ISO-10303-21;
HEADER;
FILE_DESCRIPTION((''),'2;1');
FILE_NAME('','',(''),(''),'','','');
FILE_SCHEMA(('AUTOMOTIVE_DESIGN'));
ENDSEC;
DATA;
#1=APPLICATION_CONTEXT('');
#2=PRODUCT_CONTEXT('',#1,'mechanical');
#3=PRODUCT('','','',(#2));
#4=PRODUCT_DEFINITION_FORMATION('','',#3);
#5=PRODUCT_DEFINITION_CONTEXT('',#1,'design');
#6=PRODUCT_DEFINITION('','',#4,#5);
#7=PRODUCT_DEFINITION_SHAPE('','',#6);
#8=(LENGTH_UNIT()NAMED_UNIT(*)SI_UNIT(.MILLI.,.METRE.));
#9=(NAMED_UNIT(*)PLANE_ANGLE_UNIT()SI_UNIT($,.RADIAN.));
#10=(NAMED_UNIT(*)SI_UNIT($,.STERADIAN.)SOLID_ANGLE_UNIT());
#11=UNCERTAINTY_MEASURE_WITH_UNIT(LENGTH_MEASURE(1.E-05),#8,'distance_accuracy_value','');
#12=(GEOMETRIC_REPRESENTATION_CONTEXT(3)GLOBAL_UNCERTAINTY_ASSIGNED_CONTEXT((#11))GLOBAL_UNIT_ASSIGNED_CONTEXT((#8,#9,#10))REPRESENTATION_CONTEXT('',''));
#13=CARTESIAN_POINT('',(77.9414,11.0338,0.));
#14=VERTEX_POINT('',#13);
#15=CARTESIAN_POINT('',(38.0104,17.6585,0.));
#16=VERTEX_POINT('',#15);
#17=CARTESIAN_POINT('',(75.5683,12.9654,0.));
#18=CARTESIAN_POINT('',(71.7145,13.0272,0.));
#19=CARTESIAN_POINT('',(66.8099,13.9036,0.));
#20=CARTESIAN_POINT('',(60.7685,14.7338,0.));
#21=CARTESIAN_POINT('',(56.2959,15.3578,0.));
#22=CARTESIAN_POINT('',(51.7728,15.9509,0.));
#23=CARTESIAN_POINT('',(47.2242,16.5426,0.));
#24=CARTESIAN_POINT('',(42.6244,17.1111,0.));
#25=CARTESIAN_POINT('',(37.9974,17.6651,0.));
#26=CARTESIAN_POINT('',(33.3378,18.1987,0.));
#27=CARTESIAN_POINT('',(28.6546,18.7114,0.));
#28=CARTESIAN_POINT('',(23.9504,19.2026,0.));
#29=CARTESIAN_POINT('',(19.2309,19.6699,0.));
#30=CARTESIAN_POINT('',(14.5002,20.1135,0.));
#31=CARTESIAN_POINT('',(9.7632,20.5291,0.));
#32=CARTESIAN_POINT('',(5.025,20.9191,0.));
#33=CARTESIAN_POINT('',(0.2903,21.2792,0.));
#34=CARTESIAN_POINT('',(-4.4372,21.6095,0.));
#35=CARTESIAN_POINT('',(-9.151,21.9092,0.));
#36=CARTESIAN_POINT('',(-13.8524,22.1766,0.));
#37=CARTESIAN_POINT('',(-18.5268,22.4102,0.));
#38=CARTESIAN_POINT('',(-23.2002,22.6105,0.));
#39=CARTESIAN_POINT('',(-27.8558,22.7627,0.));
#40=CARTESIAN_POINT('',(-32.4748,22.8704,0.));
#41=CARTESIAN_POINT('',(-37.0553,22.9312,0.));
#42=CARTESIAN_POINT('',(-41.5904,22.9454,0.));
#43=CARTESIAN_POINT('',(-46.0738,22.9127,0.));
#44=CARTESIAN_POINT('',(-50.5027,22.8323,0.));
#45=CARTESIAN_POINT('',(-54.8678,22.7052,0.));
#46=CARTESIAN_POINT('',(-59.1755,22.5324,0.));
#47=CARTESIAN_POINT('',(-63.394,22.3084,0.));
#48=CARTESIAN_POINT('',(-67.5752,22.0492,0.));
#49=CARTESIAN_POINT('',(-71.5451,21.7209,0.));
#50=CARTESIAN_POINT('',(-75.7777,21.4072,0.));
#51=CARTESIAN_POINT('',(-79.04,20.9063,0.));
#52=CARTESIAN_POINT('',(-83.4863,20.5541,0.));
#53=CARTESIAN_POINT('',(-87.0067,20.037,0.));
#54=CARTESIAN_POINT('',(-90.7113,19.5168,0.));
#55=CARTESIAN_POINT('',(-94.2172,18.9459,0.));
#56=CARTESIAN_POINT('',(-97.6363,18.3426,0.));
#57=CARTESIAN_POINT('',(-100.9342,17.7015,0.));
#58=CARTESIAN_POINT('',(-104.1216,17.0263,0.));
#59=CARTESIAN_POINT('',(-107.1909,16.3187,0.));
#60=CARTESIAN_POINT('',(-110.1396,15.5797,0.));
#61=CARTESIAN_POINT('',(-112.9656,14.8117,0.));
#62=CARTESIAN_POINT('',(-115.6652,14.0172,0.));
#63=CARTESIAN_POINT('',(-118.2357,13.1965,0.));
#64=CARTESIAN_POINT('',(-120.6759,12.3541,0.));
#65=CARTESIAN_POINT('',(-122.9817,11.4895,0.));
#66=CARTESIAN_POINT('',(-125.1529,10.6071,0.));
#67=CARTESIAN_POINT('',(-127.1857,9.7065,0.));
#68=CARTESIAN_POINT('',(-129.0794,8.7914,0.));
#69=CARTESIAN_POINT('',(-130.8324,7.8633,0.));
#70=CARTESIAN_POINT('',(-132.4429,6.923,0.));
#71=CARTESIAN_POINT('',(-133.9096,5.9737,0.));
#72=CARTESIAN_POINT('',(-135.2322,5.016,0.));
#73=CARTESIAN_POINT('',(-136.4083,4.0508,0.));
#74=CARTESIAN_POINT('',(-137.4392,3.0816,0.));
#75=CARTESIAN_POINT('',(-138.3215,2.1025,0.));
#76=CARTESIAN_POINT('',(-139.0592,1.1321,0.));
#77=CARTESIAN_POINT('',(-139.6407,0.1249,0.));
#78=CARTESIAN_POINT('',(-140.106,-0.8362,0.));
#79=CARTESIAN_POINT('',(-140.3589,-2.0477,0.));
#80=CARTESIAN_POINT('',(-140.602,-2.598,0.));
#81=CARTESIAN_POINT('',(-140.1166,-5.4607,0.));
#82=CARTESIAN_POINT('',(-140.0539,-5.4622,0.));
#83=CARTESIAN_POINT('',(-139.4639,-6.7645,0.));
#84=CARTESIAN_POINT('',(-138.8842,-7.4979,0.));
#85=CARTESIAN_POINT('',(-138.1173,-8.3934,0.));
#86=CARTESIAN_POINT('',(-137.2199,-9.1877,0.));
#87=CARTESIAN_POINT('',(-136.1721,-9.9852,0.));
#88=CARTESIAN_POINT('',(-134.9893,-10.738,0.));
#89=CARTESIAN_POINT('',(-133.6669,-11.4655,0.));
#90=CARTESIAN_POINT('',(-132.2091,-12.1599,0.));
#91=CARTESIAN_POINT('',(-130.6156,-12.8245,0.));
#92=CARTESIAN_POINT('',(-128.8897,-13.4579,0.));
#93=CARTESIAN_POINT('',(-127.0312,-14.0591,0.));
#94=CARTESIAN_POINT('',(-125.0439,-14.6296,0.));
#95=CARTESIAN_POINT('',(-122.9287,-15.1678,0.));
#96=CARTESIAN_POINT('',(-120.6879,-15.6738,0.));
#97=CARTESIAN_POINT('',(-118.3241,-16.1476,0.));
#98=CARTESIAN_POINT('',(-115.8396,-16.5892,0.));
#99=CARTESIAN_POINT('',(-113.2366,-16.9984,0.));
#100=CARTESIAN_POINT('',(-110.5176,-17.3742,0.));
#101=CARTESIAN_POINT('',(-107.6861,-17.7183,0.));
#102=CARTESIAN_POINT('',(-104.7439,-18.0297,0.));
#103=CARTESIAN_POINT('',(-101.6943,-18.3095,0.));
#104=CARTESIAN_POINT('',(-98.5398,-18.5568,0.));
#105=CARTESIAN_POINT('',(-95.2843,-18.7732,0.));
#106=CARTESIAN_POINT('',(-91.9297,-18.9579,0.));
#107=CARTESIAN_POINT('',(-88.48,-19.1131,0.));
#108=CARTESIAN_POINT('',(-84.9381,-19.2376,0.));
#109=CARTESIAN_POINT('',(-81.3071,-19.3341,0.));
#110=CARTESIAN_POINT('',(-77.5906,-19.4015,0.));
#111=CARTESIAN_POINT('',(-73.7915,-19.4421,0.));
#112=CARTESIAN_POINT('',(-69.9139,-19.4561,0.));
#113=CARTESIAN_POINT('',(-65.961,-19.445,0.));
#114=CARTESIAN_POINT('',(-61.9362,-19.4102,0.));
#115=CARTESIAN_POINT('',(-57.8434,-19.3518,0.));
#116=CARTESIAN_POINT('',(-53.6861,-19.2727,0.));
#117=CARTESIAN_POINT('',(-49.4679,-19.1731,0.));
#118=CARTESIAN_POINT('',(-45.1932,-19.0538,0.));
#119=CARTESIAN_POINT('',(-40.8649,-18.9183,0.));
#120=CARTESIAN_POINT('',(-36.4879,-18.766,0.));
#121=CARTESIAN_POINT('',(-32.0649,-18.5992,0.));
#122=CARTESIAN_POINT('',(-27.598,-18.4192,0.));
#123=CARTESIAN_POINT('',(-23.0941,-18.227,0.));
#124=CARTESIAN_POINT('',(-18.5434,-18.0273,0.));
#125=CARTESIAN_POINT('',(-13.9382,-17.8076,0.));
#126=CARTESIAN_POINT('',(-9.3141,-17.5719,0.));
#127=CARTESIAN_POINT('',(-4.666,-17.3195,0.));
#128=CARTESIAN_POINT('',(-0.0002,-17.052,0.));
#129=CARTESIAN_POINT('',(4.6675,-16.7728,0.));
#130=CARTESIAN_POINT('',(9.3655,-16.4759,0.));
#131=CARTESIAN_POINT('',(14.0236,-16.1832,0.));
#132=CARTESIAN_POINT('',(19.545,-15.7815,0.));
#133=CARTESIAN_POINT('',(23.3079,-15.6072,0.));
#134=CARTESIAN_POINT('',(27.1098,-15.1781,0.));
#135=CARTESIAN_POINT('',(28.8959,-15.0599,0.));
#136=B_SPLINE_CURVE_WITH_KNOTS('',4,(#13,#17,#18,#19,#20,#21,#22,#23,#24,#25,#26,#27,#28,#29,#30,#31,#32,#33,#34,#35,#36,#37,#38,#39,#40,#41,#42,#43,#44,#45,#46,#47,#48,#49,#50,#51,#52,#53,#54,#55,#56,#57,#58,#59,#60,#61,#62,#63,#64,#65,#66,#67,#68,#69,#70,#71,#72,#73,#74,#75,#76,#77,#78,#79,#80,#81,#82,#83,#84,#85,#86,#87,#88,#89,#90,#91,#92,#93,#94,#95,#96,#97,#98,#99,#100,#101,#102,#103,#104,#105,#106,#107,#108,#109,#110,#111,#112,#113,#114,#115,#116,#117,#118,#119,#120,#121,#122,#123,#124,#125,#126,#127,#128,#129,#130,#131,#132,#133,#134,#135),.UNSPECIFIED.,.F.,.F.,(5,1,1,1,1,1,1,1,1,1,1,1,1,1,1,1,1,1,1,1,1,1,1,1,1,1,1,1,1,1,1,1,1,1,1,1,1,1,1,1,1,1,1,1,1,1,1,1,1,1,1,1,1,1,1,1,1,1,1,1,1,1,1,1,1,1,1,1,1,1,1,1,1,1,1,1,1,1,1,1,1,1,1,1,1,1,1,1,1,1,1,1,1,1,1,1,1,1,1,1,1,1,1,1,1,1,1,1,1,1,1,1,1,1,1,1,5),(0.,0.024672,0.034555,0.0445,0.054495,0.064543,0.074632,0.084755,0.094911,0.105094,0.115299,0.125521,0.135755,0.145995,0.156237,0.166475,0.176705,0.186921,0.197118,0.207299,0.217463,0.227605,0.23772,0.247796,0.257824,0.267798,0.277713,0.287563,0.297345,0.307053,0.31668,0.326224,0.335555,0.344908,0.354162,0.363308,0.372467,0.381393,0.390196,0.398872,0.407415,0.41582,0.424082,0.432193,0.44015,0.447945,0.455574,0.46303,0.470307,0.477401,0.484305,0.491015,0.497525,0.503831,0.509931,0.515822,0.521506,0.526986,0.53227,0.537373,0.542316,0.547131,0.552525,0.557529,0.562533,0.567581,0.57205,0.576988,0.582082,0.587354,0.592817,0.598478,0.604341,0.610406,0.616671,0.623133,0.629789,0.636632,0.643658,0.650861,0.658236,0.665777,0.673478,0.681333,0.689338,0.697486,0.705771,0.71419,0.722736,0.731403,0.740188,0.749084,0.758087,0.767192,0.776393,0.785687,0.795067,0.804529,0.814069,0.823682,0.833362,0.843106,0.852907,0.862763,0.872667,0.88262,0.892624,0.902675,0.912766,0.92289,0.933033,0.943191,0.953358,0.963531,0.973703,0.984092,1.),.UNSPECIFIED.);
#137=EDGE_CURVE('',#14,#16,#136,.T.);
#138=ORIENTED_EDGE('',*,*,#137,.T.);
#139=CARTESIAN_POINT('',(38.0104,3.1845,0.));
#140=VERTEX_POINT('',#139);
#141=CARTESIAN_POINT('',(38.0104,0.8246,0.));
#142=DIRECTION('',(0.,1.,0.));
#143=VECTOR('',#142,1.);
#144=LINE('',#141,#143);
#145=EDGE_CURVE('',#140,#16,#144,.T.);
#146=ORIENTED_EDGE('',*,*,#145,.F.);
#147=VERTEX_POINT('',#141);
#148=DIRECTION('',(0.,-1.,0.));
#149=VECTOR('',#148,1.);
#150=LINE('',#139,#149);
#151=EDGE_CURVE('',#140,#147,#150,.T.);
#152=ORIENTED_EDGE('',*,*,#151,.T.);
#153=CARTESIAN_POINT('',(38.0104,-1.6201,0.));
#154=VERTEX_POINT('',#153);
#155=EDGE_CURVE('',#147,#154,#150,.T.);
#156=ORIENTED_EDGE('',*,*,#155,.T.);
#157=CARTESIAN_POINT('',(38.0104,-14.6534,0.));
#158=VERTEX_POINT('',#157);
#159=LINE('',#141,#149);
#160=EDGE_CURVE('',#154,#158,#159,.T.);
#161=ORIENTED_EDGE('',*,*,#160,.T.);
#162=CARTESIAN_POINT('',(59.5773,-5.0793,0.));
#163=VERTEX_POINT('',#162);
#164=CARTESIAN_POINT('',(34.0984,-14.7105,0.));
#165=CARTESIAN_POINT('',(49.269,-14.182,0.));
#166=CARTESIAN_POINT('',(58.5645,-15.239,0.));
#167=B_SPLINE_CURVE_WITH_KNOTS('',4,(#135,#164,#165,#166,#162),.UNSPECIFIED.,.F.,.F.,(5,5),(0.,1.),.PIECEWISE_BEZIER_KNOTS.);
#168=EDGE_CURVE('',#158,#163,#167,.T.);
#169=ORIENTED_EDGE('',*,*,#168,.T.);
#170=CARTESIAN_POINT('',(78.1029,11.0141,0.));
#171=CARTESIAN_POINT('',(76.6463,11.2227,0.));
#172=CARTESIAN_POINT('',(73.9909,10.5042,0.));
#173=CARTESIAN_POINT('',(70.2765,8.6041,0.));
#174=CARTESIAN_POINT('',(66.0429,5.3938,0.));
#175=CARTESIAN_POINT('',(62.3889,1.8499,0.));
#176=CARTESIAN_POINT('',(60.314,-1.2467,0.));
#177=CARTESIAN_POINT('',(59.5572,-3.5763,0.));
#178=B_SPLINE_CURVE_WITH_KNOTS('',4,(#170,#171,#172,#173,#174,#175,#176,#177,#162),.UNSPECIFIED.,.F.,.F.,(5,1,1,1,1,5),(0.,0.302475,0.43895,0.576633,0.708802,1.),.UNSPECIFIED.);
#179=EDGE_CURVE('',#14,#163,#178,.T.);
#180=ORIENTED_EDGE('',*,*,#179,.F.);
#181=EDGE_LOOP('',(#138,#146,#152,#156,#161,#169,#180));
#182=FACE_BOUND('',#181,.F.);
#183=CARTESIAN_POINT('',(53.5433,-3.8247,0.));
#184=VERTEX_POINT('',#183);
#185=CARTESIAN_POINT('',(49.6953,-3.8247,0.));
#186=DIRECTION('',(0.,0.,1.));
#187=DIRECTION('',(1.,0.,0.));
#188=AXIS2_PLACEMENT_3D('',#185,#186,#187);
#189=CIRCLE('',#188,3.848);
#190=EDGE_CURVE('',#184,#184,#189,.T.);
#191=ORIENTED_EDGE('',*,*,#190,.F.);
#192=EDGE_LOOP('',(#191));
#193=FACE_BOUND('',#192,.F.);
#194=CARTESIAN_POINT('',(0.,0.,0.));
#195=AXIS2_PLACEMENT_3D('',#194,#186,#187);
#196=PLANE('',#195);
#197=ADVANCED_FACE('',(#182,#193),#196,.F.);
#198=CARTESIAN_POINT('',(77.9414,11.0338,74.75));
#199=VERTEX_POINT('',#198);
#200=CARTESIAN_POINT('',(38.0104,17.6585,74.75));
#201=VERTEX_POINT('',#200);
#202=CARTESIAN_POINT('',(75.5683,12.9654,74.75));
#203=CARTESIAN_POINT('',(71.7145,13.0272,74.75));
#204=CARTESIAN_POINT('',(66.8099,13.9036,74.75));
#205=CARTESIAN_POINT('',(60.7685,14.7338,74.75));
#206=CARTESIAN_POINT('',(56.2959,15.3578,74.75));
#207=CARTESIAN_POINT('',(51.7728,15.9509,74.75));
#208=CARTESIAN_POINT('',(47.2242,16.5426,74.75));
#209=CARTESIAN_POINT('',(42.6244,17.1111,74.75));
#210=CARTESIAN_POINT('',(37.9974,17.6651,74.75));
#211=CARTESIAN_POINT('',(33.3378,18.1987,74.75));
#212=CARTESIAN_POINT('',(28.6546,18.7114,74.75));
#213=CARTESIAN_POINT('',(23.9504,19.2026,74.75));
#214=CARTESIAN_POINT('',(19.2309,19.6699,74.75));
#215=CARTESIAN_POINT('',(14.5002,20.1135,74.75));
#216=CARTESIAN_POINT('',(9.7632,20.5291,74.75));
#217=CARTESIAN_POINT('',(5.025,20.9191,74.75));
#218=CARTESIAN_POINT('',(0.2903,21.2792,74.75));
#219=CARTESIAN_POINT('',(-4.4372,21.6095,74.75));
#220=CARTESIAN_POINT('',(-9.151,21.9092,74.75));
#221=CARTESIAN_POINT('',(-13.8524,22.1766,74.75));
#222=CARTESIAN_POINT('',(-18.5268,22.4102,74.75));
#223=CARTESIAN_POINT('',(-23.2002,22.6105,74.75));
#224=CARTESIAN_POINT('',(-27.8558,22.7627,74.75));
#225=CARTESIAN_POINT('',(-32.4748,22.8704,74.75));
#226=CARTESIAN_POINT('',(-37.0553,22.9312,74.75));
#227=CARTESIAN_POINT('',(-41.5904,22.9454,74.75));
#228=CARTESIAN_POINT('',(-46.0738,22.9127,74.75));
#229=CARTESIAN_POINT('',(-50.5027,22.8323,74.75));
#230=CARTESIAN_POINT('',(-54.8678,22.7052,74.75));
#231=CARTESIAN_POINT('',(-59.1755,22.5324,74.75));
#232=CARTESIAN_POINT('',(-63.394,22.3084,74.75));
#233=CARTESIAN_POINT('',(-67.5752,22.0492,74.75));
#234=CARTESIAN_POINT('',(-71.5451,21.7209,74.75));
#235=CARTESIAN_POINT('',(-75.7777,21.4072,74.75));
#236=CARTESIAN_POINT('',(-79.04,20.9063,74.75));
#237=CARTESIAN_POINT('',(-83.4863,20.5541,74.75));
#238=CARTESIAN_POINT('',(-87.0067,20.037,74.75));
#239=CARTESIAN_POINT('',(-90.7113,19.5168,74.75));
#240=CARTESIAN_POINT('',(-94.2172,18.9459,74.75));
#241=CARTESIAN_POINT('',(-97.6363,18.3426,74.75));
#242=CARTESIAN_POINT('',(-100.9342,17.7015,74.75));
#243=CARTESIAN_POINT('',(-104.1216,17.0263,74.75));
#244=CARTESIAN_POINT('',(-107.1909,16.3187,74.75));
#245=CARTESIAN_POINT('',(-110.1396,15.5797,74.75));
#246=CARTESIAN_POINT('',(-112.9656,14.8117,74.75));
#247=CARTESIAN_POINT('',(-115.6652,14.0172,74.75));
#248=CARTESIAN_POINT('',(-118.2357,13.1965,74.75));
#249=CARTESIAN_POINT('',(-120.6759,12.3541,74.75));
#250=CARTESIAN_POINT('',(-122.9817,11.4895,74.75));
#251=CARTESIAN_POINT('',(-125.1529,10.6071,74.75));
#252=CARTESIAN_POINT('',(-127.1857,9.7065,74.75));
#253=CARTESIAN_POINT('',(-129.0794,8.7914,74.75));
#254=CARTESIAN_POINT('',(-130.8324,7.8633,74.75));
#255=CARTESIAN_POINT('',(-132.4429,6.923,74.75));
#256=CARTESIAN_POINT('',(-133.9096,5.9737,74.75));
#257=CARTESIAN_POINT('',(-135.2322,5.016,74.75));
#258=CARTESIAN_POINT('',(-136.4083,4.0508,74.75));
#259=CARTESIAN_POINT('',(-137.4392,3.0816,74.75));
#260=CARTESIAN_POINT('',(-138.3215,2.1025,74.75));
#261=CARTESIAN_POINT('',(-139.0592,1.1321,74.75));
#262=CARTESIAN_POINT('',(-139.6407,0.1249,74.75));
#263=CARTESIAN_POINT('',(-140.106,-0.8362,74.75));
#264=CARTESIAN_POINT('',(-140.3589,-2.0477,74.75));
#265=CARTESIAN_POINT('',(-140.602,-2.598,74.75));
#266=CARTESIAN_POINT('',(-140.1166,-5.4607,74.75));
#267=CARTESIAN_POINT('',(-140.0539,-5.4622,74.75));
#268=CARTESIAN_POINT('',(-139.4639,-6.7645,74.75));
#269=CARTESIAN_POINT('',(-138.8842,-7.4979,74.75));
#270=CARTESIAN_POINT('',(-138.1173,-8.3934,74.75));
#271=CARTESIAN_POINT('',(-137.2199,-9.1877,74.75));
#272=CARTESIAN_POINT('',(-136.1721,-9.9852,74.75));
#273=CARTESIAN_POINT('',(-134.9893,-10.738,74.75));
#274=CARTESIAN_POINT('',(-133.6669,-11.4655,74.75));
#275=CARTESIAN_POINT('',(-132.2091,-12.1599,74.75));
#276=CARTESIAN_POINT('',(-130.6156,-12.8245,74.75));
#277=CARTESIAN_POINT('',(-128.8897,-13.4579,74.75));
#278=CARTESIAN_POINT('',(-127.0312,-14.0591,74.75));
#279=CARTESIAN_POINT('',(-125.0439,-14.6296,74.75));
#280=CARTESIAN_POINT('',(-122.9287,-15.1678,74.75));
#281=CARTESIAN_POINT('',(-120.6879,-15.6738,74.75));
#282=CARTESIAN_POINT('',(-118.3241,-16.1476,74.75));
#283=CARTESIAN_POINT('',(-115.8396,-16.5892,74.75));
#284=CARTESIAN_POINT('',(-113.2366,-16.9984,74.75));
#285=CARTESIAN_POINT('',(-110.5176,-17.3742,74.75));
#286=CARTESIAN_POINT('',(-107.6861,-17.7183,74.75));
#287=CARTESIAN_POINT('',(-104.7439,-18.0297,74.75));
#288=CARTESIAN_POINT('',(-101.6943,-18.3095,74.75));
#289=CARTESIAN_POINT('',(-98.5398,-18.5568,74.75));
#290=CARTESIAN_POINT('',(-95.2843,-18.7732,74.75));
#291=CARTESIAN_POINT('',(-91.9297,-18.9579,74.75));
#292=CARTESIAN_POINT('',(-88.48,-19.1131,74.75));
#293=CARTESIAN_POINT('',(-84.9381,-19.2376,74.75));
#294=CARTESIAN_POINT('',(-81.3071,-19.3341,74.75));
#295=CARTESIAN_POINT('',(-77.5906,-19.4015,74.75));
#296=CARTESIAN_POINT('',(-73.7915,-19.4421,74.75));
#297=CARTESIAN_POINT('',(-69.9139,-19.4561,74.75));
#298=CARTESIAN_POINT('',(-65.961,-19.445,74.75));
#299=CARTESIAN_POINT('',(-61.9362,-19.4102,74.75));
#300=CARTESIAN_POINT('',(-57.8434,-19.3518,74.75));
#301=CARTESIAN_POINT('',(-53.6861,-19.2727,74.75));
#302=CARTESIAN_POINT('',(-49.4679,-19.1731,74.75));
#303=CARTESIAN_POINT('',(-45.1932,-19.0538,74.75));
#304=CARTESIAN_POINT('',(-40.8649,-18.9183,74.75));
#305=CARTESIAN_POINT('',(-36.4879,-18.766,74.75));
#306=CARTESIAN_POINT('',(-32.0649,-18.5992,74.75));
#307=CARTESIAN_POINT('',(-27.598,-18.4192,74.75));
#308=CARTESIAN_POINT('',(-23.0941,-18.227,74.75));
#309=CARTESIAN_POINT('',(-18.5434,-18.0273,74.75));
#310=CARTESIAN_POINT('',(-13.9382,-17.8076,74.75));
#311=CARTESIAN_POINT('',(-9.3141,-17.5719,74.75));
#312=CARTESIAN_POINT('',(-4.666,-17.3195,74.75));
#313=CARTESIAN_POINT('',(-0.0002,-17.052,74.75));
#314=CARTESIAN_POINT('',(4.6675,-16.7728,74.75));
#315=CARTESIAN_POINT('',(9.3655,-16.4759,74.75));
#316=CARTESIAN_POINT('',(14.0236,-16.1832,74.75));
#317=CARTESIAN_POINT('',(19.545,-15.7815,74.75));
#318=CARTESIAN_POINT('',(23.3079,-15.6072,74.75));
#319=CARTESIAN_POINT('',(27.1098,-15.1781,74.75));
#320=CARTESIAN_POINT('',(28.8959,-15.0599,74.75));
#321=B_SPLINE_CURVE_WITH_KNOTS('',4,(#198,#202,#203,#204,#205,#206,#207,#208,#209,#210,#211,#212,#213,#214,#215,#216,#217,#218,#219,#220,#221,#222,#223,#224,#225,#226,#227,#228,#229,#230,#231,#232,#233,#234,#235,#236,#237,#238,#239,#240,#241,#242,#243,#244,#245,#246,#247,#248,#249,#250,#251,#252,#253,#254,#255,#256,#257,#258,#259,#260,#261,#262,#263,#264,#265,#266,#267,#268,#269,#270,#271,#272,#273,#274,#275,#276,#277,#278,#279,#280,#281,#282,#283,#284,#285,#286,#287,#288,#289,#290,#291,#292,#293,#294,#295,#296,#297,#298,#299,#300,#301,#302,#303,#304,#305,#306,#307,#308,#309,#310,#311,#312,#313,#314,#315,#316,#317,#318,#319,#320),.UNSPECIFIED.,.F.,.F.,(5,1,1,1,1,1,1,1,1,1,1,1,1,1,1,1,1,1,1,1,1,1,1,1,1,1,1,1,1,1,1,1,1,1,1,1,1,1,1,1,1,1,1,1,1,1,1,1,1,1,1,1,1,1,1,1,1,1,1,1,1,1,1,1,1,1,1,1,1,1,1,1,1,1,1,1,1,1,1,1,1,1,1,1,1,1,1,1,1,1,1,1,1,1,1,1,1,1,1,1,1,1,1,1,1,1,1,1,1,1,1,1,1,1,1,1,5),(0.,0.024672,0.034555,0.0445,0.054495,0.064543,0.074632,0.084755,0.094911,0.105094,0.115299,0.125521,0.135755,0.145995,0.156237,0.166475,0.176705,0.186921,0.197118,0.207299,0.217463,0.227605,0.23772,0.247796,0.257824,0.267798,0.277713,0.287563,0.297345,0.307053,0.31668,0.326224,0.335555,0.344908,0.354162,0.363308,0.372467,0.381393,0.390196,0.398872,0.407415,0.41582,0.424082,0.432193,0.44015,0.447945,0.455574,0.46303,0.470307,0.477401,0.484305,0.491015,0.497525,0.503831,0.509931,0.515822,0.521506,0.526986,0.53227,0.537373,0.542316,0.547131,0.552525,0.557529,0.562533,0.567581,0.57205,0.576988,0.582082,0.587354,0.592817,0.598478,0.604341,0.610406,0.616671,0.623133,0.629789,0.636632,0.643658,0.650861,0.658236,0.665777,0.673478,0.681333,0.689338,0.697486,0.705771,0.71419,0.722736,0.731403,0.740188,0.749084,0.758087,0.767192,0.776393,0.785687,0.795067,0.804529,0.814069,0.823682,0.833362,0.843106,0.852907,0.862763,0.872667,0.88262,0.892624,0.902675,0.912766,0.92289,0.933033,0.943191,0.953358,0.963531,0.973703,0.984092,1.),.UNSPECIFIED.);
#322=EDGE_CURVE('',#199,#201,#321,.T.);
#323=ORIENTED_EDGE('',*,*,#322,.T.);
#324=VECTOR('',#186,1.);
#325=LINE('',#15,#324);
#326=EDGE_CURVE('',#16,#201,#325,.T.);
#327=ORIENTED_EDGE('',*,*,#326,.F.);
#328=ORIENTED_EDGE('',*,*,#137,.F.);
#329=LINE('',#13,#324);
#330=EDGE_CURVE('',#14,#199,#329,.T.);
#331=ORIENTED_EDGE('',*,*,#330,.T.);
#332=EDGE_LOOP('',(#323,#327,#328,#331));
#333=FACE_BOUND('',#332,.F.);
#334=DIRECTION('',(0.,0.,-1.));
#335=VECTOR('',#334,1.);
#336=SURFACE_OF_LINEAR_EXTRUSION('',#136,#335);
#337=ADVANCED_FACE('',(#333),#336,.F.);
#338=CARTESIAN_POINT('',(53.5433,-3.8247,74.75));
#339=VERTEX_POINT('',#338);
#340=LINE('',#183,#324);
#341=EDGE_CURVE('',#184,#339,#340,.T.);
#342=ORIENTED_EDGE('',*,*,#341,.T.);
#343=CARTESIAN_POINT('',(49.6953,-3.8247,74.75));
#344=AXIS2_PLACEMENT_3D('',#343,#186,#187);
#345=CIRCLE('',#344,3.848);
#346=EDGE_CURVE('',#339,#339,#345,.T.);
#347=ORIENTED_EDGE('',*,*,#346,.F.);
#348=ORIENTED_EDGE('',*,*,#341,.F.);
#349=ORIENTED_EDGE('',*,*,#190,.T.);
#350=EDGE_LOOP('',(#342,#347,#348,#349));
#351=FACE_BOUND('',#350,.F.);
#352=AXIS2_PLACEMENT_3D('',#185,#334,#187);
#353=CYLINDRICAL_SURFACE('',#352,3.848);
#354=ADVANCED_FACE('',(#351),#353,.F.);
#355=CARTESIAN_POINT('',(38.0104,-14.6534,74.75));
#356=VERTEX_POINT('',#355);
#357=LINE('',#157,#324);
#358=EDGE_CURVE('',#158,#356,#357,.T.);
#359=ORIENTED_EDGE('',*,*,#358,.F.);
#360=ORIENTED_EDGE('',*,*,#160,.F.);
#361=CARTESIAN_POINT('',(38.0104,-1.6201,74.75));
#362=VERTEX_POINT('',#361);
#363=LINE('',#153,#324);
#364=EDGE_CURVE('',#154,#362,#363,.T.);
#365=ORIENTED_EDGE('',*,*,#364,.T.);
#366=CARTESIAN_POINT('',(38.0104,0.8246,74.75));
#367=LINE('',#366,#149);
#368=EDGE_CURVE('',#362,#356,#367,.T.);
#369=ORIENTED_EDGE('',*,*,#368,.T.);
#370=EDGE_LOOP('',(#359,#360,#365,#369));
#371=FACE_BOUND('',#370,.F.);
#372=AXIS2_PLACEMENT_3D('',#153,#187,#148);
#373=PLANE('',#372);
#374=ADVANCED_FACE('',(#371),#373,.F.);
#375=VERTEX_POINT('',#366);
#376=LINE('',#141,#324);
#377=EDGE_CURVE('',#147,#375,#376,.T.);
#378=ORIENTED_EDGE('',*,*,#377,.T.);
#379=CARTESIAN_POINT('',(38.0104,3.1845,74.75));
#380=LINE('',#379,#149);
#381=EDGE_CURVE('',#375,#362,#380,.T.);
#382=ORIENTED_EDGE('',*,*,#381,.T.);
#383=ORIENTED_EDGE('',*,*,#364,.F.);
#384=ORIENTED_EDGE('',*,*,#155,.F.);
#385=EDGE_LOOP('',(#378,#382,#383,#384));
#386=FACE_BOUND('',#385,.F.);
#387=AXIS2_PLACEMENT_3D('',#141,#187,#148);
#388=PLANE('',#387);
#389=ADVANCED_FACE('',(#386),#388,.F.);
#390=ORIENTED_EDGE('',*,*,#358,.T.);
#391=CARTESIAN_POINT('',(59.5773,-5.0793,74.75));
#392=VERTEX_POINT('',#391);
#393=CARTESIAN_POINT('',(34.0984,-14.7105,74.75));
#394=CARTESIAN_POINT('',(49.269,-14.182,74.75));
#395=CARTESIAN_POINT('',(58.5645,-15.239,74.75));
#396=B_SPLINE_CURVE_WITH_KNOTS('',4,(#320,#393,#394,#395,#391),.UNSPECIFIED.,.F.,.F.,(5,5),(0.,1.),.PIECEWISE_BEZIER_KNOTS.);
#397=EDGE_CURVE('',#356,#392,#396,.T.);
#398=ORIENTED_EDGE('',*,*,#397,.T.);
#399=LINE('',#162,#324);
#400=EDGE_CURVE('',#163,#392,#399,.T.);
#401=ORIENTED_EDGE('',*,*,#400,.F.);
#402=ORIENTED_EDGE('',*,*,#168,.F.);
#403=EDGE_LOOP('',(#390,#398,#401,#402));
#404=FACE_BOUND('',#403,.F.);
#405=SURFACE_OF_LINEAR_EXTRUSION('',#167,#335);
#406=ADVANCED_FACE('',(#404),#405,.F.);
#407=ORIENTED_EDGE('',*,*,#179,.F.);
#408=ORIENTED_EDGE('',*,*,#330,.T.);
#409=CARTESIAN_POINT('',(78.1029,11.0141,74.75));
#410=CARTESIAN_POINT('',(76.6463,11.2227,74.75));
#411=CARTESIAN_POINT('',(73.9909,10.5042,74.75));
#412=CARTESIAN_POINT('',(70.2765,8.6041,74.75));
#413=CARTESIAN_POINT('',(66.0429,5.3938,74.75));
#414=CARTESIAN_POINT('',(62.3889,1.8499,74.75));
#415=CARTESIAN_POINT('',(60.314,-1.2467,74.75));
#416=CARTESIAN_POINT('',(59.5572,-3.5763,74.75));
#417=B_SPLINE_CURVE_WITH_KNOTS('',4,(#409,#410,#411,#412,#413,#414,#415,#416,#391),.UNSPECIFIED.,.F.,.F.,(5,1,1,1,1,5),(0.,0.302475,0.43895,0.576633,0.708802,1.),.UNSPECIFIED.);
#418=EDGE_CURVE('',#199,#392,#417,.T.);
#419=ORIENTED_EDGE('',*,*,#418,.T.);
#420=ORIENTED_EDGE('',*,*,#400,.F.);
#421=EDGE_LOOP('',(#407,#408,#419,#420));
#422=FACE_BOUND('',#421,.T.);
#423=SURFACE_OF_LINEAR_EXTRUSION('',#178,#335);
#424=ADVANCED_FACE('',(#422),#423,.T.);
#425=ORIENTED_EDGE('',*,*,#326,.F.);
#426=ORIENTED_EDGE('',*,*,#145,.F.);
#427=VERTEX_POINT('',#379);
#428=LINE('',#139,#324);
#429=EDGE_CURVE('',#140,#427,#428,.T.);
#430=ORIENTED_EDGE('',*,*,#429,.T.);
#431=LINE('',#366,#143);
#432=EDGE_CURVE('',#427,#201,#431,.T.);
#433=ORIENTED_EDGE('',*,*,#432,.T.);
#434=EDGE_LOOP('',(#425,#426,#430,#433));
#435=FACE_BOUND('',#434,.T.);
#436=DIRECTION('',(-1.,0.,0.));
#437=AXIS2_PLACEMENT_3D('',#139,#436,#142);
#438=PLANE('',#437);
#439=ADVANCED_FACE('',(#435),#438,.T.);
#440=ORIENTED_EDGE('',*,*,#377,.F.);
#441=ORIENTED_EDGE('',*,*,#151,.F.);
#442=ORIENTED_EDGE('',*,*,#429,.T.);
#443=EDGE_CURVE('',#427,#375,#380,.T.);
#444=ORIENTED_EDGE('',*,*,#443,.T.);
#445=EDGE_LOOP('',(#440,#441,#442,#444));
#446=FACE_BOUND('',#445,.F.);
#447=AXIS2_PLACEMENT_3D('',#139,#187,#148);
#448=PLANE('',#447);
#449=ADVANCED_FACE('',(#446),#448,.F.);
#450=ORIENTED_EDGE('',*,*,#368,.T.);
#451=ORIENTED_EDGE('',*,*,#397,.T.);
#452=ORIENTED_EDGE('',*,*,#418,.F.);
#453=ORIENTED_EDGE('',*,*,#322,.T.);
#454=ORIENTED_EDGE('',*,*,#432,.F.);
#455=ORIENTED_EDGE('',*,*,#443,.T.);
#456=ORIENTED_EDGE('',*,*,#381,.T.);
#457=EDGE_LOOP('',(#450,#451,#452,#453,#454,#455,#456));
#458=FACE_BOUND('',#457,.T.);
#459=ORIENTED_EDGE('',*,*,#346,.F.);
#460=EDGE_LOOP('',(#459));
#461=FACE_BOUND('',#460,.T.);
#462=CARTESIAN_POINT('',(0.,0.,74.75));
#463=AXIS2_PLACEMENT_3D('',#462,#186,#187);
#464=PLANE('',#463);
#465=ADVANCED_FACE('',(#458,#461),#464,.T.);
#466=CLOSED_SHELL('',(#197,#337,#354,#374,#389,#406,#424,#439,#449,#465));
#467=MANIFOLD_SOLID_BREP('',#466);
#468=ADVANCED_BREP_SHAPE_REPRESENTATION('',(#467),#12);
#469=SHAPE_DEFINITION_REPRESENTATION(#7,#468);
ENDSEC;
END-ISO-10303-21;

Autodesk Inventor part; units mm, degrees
ref_plane "YZ Plane" through (0, 0, 0) normal (1, 0, 0) x (0, 1, 0)
ref_plane "XZ Plane" through (0, 0, 0) normal (0, 1, 0) x (-1, 0, 0)
ref_plane "XY Plane" through (0, 0, 0) normal (0, 0, 1) x (1, 0, 0)
sketch "Sketch3" plane through (0, 0, 0) normal (0, 0, 1) x (1, 0, 0)
  line L0 (-80.5781, 0.8246) -> (-80.5781, 20.7988) construction
  circle A0 centre (-80.5781, 0.8246) radius 13.481
  line L1 (-53.7179, 12.5571) -> (-53.7179, -10.9927)
  arc A1 (-53.7179, -10.9927) -> (-51.5054, -12.9814) centre (-51.7179, -10.9927) ccw
  arc A2 (-51.5054, 14.5458) -> (-53.7179, 12.5571) centre (-51.7179, 12.5571) ccw
  line L2 (36.2229, -3.6088) -> (-51.5054, -12.9814)
  line L3 (38.0104, 3.1845) -> (38.0104, -1.6201)
  line L4 (-80.5781, 0.8246) -> (49.5525, 0.8246) construction
  circle A3 centre (49.6953, -3.8247) radius 3.848
  line L5 (59.6953, 14.884) -> (59.6953, -12.7998) construction
  spline S0 degree 4 poles (77.9414, 11.0338) (75.5683, 12.9654) (71.7145, 13.0272) (66.8099, 13.9036) (60.7685, 14.7338) (56.2959, 15.3578) (51.7728, 15.9509) (47.2242, 16.5426) (42.6244, 17.1111) (37.9974, 17.6651) (33.3378, 18.1987) (28.6546, 18.7114) (23.9504, 19.2026) (19.2309, 19.6699) (14.5002, 20.1135) (9.7632, 20.5291) (5.025, 20.9191) (0.2903, 21.2792) (-4.4372, 21.6095) (-9.151, 21.9092) (-13.8524, 22.1766) (-18.5268, 22.4102) (-23.2002, 22.6105) (-27.8558, 22.7627) (-32.4748, 22.8704) (-37.0553, 22.9312) (-41.5904, 22.9454) (-46.0738, 22.9127) (-50.5027, 22.8323) (-54.8678, 22.7052) (-59.1755, 22.5324) (-63.394, 22.3084) (-67.5752, 22.0492) (-71.5451, 21.7209) (-75.7777, 21.4072) (-79.04, 20.9063) (-83.4863, 20.5541) (-87.0067, 20.037) (-90.7113, 19.5168) (-94.2172, 18.9459) (-97.6363, 18.3426) (-100.9342, 17.7015) (-104.1216, 17.0263) (-107.1909, 16.3187) (-110.1396, 15.5797) (-112.9656, 14.8117) (-115.6652, 14.0172) (-118.2357, 13.1965) (-120.6759, 12.3541) (-122.9817, 11.4895) (-125.1529, 10.6071) (-127.1857, 9.7065) (-129.0794, 8.7914) (-130.8324, 7.8633) (-132.4429, 6.923) (-133.9096, 5.9737) (-135.2322, 5.016) (-136.4083, 4.0508) (-137.4392, 3.0816) (-138.3215, 2.1025) (-139.0592, 1.1321) (-139.6407, 0.1249) (-140.106, -0.8362) (-140.3589, -2.0477) (-140.602, -2.598) (-140.1166, -5.4607) (-140.0539, -5.4622) (-139.4639, -6.7645) (-138.8842, -7.4979) (-138.1173, -8.3934) (-137.2199, -9.1877) (-136.1721, -9.9852) (-134.9893, -10.738) (-133.6669, -11.4655) (-132.2091, -12.1599) (-130.6156, -12.8245) (-128.8897, -13.4579) (-127.0312, -14.0591) (-125.0439, -14.6296) (-122.9287, -15.1678) (-120.6879, -15.6738) (-118.3241, -16.1476) (-115.8396, -16.5892) (-113.2366, -16.9984) (-110.5176, -17.3742) (-107.6861, -17.7183) (-104.7439, -18.0297) (-101.6943, -18.3095) (-98.5398, -18.5568) (-95.2843, -18.7732) (-91.9297, -18.9579) (-88.48, -19.1131) (-84.9381, -19.2376) (-81.3071, -19.3341) (-77.5906, -19.4015) (-73.7915, -19.4421) (-69.9139, -19.4561) (-65.961, -19.445) (-61.9362, -19.4102) (-57.8434, -19.3518) (-53.6861, -19.2727) (-49.4679, -19.1731) (-45.1932, -19.0538) (-40.8649, -18.9183) (-36.4879, -18.766) (-32.0649, -18.5992) (-27.598, -18.4192) (-23.0941, -18.227) (-18.5434, -18.0273) (-13.9382, -17.8076) (-9.3141, -17.5719) (-4.666, -17.3195) (-0.0002, -17.052) (4.6675, -16.7728) (9.3655, -16.4759) (14.0236, -16.1832) (19.545, -15.7815) (23.3079, -15.6072) (27.1098, -15.1781) (28.8959, -15.0599) knots 0 0 0 0 0 0.024672 0.034555 0.0445 0.054495 0.064543 0.074632 0.084755 0.094911 0.105094 0.115299 0.125521 0.135755 0.145995 0.156237 0.166475 0.176705 0.186921 0.197118 0.207299 0.217463 0.227605 0.23772 0.247796 0.257824 0.267798 0.277713 0.287563 0.297345 0.307053 0.31668 0.326224 0.335555 0.344908 0.354162 0.363308 0.372467 0.381393 0.390196 0.398872 0.407415 0.41582 0.424082 0.432193 0.44015 0.447945 0.455574 0.46303 0.470307 0.477401 0.484305 0.491015 0.497525 0.503831 0.509931 0.515822 0.521506 0.526986 0.53227 0.537373 0.542316 0.547131 0.552525 0.557529 0.562533 0.567581 0.57205 0.576988 0.582082 0.587354 0.592817 0.598478 0.604341 0.610406 0.616671 0.623133 0.629789 0.636632 0.643658 0.650861 0.658236 0.665777 0.673478 0.681333 0.689338 0.697486 0.705771 0.71419 0.722736 0.731403 0.740188 0.749084 0.758087 0.767192 0.776393 0.785687 0.795067 0.804529 0.814069 0.823682 0.833362 0.843106 0.852907 0.862763 0.872667 0.88262 0.892624 0.902675 0.912766 0.92289 0.933033 0.943191 0.953358 0.963531 0.973703 0.984092 1 1 1 1 1
  line L6 (7.5013, -16.4763) -> (50.2906, -13.6435) construction
  arc A4 (44.8353, -17.2546) -> (13.385, -19.3367) centre (31.5327, -54.8885) ccw construction
  line L7 (159.6953, -3.8066) -> (59.6953, -3.8066) construction
  line L8 (-51.5054, 14.5458) -> (36.2229, 5.1732)
  arc A5 (36.2229, -3.6088) -> (38.0104, -1.6201) centre (36.0104, -1.6201) ccw
  arc A6 (38.0104, 3.1845) -> (36.2229, 5.1732) centre (36.0104, 3.1845) ccw
  spline S1 degree 4 poles (78.1029, 11.0141) (76.6463, 11.2227) (73.9909, 10.5042) (70.2765, 8.6041) (66.0429, 5.3938) (62.3889, 1.8499) (60.314, -1.2467) (59.5572, -3.5763) (59.5773, -5.0793) knots 0 0 0 0 0 0.302475 0.43895 0.576633 0.708802 1 1 1 1 1
  spline S2 degree 4 poles (28.8959, -15.0599) (34.0984, -14.7105) (49.269, -14.182) (58.5645, -15.239) (59.5773, -5.0793) knots 0 0 0 0 0 1 1 1 1 1
  line L9 (28.8959, -15.0599) -> (34.0984, -14.7105) construction
  line L10 (34.0984, -14.7105) -> (49.269, -14.182) construction
  line L11 (49.269, -14.182) -> (58.5645, -15.239) construction
  line L12 (58.5645, -15.239) -> (59.5773, -5.0793) construction
  line L13 (-140.4646, -2.8394) -> (159.4818, -3.8173) construction
  line L14 (-132.0856, 0.6333) -> (-132.0856, -6.3667)
  line L15 (-132.0856, -6.3667) -> (-110.3816, -12.3574)
  line L16 (-110.3816, -12.3574) -> (-104.797, -12.3574)
  line L17 (-104.797, -12.3574) -> (-104.797, -18.0156)
  line L18 (-132.0856, 0.6333) -> (-110.3816, 10.553)
  line L19 (-110.3816, 10.553) -> (-104.1736, 10.553)
  line L20 (-104.1736, 10.553) -> (-104.1736, 17.0026)
  line L21 (38.0104, 0.8246) -> (38.0104, -14.6534)
  line L22 (38.0104, 0.8246) -> (38.0104, 17.6585)
  point P0 (0, 0)
  point P1 (17.6589, 23.5628)
  point P2 (75.883, 10.8572)
  point P3 (72.8647, 9.7686)
  point P4 (69.4179, 7.8149)
  point P5 (66.0452, 5.2617)
  point P6 (63.1887, 2.4463)
  point P7 (61.1228, -0.3317)
  point P8 (59.9357, -2.8689)
  point P9 (-160.0931, -3.8671)
  point P10 (28.8959, -15.0599)
  point P11 (69.5533, 13.4647)
  point P12 (65.1899, 14.1023)
  point P13 (60.7936, 14.7318)
  point P14 (56.3207, 15.3468)
  point P15 (51.7945, 15.947)
  point P16 (47.2398, 16.5346)
  point P17 (42.6414, 17.1053)
  point P18 (33.3491, 18.1925)
  point P19 (28.6632, 18.7055)
  point P20 (23.9568, 19.1966)
  point P21 (19.2348, 19.6643)
  point P22 (14.5017, 20.1074)
  point P23 (9.7623, 20.5238)
  point P24 (5.0217, 20.9132)
  point P25 (0.2844, 21.2735)
  point P26 (-4.4451, 21.6038)
  point P27 (-9.1614, 21.9032)
  point P28 (-13.86, 22.1702)
  point P29 (-18.5361, 22.4036)
  point P30 (-23.211, 22.601)
  point P31 (-27.8721, 22.754)
  point P32 (-32.4966, 22.8611)
  point P33 (-37.0797, 22.9217)
  point P34 (-41.6169, 22.9356)
  point P35 (-46.1028, 22.9023)
  point P36 (-50.5329, 22.8216)
  point P37 (-54.9021, 22.6941)
  point P38 (-59.2065, 22.5195)
  point P39 (-63.4406, 22.2977)
  point P40 (-67.6008, 22.0302)
  point P41 (-71.6806, 21.7165)
  point P42 (-75.6814, 21.3591)
  point P43 (-79.1834, 20.9458)
  point P44 (-83.4048, 20.5095)
  point P45 (-87.1309, 20.023)
  point P46 (-90.7527, 19.494)
  point P47 (-94.2725, 18.9266)
  point P48 (-97.6845, 18.3211)
  point P49 (-100.9861, 17.6791)
  point P50 (-107.2438, 16.2934)
  point P51 (-110.1931, 15.553)
  point P52 (-113.0194, 14.7835)
  point P53 (-115.7191, 13.987)
  point P54 (-118.2898, 13.165)
  point P55 (-120.7294, 12.3201)
  point P56 (-123.0349, 11.454)
  point P57 (-125.2048, 10.569)
  point P58 (-127.2364, 9.6666)
  point P59 (-129.1282, 8.7491)
  point P60 (-130.8786, 7.8185)
  point P61 (-132.486, 6.8762)
  point P62 (-133.9488, 5.9245)
  point P63 (-135.2661, 4.9648)
  point P64 (-136.4363, 3.9987)
  point P65 (-137.4592, 3.0275)
  point P66 (-138.3336, 2.0531)
  point P67 (-139.0591, 1.0763)
  point P68 (-139.6352, 0.0983)
  point P69 (-140.0613, -0.8802)
  point P70 (-140.338, -1.8576)
  point P71 (-140.1239, -5.2398)
  point P72 (-139.9547, -5.7022)
  point P73 (-139.492, -6.6066)
  point P74 (-138.8844, -7.4823)
  point P75 (-138.1328, -8.3292)
  point P76 (-137.2384, -9.147)
  point P77 (-136.202, -9.9355)
  point P78 (-135.0249, -10.6943)
  point P79 (-133.7085, -11.4228)
  point P80 (-132.2548, -12.1206)
  point P81 (-130.6648, -12.7879)
  point P82 (-128.941, -13.4239)
  point P83 (-127.0846, -14.0282)
  point P84 (-125.0983, -14.6009)
  point P85 (-122.9839, -15.1415)
  point P86 (-120.7435, -15.6497)
  point P87 (-118.3798, -16.1256)
  point P88 (-115.8952, -16.569)
  point P89 (-113.2918, -16.9797)
  point P90 (-110.5723, -17.3574)
  point P91 (-107.74, -17.7027)
  point P92 (-101.7463, -18.2964)
  point P93 (-98.5909, -18.5451)
  point P94 (-95.3341, -18.7623)
  point P95 (-91.9783, -18.9484)
  point P96 (-88.5271, -19.1041)
  point P97 (-84.9838, -19.2298)
  point P98 (-81.3514, -19.3267)
  point P99 (-77.6332, -19.3951)
  point P100 (-73.8324, -19.4362)
  point P101 (-69.9531, -19.4509)
  point P102 (-65.9985, -19.4404)
  point P103 (-61.9719, -19.4059)
  point P104 (-57.8772, -19.3483)
  point P105 (-53.718, -19.2694)
  point P106 (-49.4979, -19.1701)
  point P107 (-45.2211, -19.0516)
  point P108 (-40.8909, -18.916)
  point P109 (-36.5118, -18.7642)
  point P110 (-32.0871, -18.5977)
  point P111 (-27.6213, -18.418)
  point P112 (-23.1183, -18.2269)
  point P113 (-18.5646, -18.0247)
  point P114 (-13.9566, -17.8054)
  point P115 (-9.3252, -17.5693)
  point P116 (-4.674, -17.317)
  point P117 (-0.0078, -17.05)
  point P118 (4.6686, -16.7695)
  point P119 (9.3513, -16.477)
  point P120 (14.0352, -16.1731)
  point P121 (18.7161, -15.8596)
  point P122 (23.3889, -15.5371)
  point P123 (78.0825, 12.164)
  point P124 (159.2574, -3.8401)
  point P125 (158.8836, -3.8779)
  point P126 (158.3607, -3.9307)
  point P127 (157.6896, -3.9985)
  point P128 (156.8706, -4.081)
  point P129 (155.9046, -4.1779)
  point P130 (154.7931, -4.2892)
  point P131 (153.5367, -4.4143)
  point P132 (152.1372, -4.5532)
  point P133 (150.5955, -4.7056)
  point P134 (148.914, -4.8712)
  point P135 (147.0936, -5.0494)
  point P136 (145.137, -5.2399)
  point P137 (143.0457, -5.4421)
  point P138 (140.8221, -5.6563)
  point P139 (138.4686, -5.8813)
  point P140 (135.9876, -6.1174)
  point P141 (133.3815, -6.3634)
  point P142 (130.6533, -6.6196)
  point P143 (127.8054, -6.8851)
  point P144 (124.8414, -7.1596)
  point P145 (121.7634, -7.4428)
  point P146 (118.5756, -7.7341)
  point P147 (115.2804, -8.0332)
  point P148 (111.8817, -8.3395)
  point P149 (108.3828, -8.6527)
  point P150 (104.787, -8.9722)
  point P151 (101.0985, -9.2974)
  point P152 (97.3206, -9.6283)
  point P153 (93.4572, -9.9643)
  point P154 (89.5122, -10.3048)
  point P155 (85.4898, -10.6492)
  point P156 (81.3936, -10.9969)
  point P157 (77.2284, -11.3479)
  point P158 (72.9975, -11.701)
  point P159 (68.7057, -12.0556)
  point P160 (64.3572, -12.4117)
  point P161 (59.9559, -12.7678)
  point P162 (55.5069, -13.1239)
  point P163 (51.0138, -13.4788)
  point P164 (46.4817, -13.8316)
  point P165 (41.9148, -14.182)
  point P166 (35.7035, -14.3277)
  point P167 (32.6946, -14.8708)
  point P168 (82.2459, 11.5043)
  point P169 (86.3364, 10.8401)
  point P170 (90.3495, 10.1732)
  point P171 (94.2816, 9.5051)
  point P172 (98.1288, 8.837)
  point P173 (101.8872, 8.171)
  point P174 (105.5538, 7.5086)
  point P175 (109.1244, 6.8507)
  point P176 (112.596, 6.1997)
  point P177 (115.9653, 5.5565)
  point P178 (119.2287, 4.9229)
  point P179 (122.3835, 4.3007)
  point P180 (125.4264, 3.6911)
  point P181 (128.3547, 3.0956)
  point P182 (131.1654, 2.5157)
  point P183 (133.8561, 1.9532)
  point P184 (136.4244, 1.4093)
  point P185 (138.8676, 0.8855)
  point P186 (141.1833, 0.383)
  point P187 (143.3697, -0.0964)
  point P188 (145.4247, -0.5518)
  point P189 (147.3462, -0.9817)
  point P190 (149.1327, -1.3852)
  point P191 (150.7821, -1.7608)
  point P192 (152.2935, -2.1073)
  point P193 (153.6651, -2.4241)
  point P194 (154.8954, -2.7103)
  point P195 (155.9838, -2.9647)
  point P196 (156.9291, -3.187)
  point P197 (157.7307, -3.376)
  point P198 (158.3871, -3.5317)
  point P199 (158.8986, -3.6529)
  dimension "d3" = 26.962
  dimension "d6" = 7.696
  dimension "d7" = 110
  dimension "d8" = 100
  dimension "d9" = 2
  dimension "d11" = 4.6493
  dimension "d25" = 7
  dimension "d26" = 3.5
  dimension "d27" = 8.379
  dimension "d28" = 30.083
  dimension "d29" = 5
  dimension "d30" = 5
  dimension "d31" = 59.8865
extrude "Extrusion3" add sketch "Sketch3" along normal blind 74.75 contours L22 S0 S1 S2 L21 L3
properties part number "3P.05.06.JS.flap trailing edge 74_CPY" material "Polyurethane Foam"
